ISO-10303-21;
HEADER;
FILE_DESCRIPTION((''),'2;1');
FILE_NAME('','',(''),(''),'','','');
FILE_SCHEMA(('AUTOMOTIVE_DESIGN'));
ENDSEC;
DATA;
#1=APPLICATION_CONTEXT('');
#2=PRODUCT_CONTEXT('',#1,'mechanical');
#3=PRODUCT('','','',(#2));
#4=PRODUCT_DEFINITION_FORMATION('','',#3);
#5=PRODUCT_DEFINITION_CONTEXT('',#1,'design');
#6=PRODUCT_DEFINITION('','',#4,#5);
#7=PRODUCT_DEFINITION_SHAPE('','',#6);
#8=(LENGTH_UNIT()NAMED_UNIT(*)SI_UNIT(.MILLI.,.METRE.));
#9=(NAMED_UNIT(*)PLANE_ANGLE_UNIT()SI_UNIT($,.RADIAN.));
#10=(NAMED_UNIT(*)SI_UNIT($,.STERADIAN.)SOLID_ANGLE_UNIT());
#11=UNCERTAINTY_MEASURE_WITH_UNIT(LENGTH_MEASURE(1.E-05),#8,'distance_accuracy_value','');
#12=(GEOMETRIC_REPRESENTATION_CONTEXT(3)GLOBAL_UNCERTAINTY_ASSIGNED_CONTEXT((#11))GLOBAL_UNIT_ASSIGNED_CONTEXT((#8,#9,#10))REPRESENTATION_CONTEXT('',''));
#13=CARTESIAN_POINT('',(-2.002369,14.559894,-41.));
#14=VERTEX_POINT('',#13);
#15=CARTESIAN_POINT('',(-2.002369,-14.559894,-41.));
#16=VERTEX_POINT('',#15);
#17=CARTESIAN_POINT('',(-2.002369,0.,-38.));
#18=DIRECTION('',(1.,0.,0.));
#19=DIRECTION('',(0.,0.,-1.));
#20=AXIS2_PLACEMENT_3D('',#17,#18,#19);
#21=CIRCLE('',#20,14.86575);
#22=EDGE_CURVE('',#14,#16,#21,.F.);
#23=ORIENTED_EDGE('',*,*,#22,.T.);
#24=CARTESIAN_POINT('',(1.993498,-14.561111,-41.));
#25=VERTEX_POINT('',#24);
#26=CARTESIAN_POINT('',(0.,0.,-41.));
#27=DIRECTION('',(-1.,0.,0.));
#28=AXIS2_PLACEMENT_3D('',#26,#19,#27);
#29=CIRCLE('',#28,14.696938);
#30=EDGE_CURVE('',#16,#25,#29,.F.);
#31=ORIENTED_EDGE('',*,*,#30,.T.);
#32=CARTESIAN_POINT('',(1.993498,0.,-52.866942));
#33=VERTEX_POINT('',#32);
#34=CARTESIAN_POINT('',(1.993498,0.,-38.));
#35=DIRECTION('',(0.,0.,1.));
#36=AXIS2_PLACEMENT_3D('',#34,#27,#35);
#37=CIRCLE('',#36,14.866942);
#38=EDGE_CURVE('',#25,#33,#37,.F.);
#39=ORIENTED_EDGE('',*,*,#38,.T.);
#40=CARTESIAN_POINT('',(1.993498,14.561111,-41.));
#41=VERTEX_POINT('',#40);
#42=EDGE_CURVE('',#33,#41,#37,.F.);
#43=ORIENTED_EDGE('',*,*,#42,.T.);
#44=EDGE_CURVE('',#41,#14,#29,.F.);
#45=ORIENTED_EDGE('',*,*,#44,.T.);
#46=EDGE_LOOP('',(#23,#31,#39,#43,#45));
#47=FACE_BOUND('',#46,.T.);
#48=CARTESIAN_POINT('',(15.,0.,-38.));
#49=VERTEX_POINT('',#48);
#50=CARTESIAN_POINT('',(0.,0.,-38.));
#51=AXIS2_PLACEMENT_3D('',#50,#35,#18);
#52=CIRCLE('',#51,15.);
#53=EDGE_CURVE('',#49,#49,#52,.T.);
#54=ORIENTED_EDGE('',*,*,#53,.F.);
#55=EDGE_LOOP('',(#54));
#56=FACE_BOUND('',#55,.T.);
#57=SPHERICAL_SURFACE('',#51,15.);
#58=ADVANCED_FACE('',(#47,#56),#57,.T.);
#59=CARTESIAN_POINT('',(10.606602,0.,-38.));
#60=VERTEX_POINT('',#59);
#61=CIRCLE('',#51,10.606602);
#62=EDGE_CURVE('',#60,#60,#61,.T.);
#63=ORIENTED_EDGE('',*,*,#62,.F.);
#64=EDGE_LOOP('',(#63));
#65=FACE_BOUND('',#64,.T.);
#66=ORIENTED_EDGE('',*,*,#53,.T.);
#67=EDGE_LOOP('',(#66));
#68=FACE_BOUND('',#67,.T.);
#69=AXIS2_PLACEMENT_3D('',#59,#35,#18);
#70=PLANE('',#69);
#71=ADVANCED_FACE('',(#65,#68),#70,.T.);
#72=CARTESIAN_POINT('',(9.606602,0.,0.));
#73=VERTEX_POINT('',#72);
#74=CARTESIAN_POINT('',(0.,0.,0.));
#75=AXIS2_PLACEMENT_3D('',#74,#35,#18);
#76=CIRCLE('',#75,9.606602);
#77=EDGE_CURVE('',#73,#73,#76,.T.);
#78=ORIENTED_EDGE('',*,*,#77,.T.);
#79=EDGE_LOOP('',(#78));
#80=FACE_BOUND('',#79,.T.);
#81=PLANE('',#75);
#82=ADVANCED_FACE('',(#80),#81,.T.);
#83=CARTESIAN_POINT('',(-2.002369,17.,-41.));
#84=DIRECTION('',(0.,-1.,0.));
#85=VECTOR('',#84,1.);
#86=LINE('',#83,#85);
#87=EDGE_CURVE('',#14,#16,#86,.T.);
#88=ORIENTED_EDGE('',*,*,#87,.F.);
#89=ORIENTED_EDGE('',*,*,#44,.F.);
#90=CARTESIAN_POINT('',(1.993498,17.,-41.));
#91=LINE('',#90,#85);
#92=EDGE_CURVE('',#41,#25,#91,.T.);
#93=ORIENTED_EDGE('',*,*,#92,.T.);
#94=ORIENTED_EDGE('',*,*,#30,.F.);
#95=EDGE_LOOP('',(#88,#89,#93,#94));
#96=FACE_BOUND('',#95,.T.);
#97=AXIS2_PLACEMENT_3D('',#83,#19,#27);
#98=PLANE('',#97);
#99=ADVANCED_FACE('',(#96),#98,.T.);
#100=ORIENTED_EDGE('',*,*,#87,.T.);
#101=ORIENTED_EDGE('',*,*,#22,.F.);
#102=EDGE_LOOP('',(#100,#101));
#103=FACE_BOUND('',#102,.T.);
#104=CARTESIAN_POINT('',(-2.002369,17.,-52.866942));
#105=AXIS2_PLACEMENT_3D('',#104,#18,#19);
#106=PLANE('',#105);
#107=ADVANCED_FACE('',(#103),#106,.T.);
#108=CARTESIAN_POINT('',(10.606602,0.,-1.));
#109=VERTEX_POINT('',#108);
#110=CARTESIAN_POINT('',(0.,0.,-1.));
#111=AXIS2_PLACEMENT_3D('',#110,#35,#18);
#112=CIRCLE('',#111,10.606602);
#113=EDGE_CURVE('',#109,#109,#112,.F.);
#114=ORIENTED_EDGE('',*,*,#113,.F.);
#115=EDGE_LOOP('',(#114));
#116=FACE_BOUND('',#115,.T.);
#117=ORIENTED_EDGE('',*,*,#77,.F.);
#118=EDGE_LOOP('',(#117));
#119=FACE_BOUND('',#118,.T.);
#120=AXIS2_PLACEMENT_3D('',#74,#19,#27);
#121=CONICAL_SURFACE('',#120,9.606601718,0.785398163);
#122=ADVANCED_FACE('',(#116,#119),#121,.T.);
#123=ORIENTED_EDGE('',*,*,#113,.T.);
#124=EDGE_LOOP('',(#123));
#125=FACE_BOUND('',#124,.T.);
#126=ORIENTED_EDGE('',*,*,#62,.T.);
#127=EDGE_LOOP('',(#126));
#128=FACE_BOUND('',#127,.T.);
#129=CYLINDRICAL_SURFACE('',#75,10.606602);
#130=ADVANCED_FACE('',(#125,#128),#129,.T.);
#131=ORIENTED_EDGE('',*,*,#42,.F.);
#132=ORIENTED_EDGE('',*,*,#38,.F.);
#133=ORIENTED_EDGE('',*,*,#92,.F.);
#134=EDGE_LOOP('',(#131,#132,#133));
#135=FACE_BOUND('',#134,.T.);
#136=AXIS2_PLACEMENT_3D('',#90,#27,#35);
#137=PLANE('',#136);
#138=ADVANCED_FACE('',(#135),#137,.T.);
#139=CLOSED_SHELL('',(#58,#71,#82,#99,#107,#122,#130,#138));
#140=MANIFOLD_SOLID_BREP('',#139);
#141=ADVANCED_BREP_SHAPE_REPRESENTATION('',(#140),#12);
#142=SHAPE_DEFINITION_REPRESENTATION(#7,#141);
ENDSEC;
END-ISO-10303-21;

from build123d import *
from OCP.BRepAlgoAPI import BRepAlgoAPI_Cut
from OCP.TopTools import TopTools_ListOfShape

# Parameters (mm, degrees)
CUT_EXTRUDE2_DEPTH      = 17.000000000000007
CUT_EXTRUDE2_DEPTH_BACK = 17.000000000000004
SKETCH4_R               = 1.9934980389772232
CUT_EXTRUDE3_DEPTH      = 5.000000000000005
CHAMFER1_SIZE           = 1


with BuildPart() as part:
    # Sketch1 → Revolve1 (revolve)
    with BuildSketch(Plane(origin=(0, 0, 0), x_dir=(1, 0, 0), z_dir=(0, 1, 0))):
        with BuildLine():
            Line((0, 0), (0, 38))
            Line((0, 38), (0, 53))
            ThreePointArc((0, 53), (10.60660171779814, 48.60660171779814), (15, 38))
            Line((15, 38), (10.60660171779814, 38))
            Line((10.60660171779814, 38), (10.606601717798139, -3.47e-15))
            Line((10.606601717798139, -3.47e-15), (0, 0))
        make_face()
    revolve(axis=Axis((0, 0, 0), (0, 0, -1)))


with BuildPart() as cut_extrude2_tool:
    # Sketch3 → Cut-Extrude2 (new, two sides: drawn at the far end of the back side and taken through both)
    with BuildSketch(Plane(origin=(0, 0, 0), x_dir=(1, 0, 0), z_dir=(0, 1, 0)).offset(-CUT_EXTRUDE2_DEPTH_BACK)):
        Polygon((-2.0023692524081933, 52.866942038246904), (1.9934980389762682, 52.866942038246904), (1.9934980389762682, 41), (-2.0023692524081937, 41), align=None)
    extrude(amount=CUT_EXTRUDE2_DEPTH + CUT_EXTRUDE2_DEPTH_BACK)


with BuildPart() as part_1:
    add(part.part)

    # Cut-Extrude2: cut by cut_extrude2_tool, with a tolerance
    cut_extrude2_stock = TopTools_ListOfShape()
    cut_extrude2_stock.Append(part_1.part.wrapped)
    cut_extrude2_tools = TopTools_ListOfShape()
    cut_extrude2_tools.Append(cut_extrude2_tool.part.wrapped)
    cut_extrude2_cut = BRepAlgoAPI_Cut()
    cut_extrude2_cut.SetArguments(cut_extrude2_stock)
    cut_extrude2_cut.SetTools(cut_extrude2_tools)
    cut_extrude2_cut.SetFuzzyValue(0.00001)
    cut_extrude2_cut.Build()
    add(Compound.cast(cut_extrude2_cut.Shape()).solids(), mode=Mode.REPLACE)


with BuildPart() as cut_extrude2_piece_1:
    # of the separate pieces the step leaves, piece 1, a body of its own (cut_extrude2_pieces)
    add(part_1.part.solids().sort_by_distance((1.993498039, 14.561111413, -41))[0])

    # Chamfer1
    chamfer1_edges = [cut_extrude2_piece_1.edges().sort_by_distance(p)[0] for p in [
        (-10.606601717798139, -1.3e-15, 3.47e-15),
    ]]
    chamfer(chamfer1_edges, length=CHAMFER1_SIZE)


with BuildPart() as cut_extrude2_piece_2:
    # of the separate pieces the step leaves, piece 2, a body of its own (cut_extrude2_pieces)
    add(part_1.part.solids().sort_by_distance((0, 0, -53))[0])

    # Sketch4 → Cut-Extrude3 (cut)
    with BuildSketch(Plane.XY.offset(-52.866942038246904)):
        Circle(SKETCH4_R)
    extrude(amount=-CUT_EXTRUDE3_DEPTH, mode=Mode.SUBTRACT)


solid = cut_extrude2_piece_1.part
